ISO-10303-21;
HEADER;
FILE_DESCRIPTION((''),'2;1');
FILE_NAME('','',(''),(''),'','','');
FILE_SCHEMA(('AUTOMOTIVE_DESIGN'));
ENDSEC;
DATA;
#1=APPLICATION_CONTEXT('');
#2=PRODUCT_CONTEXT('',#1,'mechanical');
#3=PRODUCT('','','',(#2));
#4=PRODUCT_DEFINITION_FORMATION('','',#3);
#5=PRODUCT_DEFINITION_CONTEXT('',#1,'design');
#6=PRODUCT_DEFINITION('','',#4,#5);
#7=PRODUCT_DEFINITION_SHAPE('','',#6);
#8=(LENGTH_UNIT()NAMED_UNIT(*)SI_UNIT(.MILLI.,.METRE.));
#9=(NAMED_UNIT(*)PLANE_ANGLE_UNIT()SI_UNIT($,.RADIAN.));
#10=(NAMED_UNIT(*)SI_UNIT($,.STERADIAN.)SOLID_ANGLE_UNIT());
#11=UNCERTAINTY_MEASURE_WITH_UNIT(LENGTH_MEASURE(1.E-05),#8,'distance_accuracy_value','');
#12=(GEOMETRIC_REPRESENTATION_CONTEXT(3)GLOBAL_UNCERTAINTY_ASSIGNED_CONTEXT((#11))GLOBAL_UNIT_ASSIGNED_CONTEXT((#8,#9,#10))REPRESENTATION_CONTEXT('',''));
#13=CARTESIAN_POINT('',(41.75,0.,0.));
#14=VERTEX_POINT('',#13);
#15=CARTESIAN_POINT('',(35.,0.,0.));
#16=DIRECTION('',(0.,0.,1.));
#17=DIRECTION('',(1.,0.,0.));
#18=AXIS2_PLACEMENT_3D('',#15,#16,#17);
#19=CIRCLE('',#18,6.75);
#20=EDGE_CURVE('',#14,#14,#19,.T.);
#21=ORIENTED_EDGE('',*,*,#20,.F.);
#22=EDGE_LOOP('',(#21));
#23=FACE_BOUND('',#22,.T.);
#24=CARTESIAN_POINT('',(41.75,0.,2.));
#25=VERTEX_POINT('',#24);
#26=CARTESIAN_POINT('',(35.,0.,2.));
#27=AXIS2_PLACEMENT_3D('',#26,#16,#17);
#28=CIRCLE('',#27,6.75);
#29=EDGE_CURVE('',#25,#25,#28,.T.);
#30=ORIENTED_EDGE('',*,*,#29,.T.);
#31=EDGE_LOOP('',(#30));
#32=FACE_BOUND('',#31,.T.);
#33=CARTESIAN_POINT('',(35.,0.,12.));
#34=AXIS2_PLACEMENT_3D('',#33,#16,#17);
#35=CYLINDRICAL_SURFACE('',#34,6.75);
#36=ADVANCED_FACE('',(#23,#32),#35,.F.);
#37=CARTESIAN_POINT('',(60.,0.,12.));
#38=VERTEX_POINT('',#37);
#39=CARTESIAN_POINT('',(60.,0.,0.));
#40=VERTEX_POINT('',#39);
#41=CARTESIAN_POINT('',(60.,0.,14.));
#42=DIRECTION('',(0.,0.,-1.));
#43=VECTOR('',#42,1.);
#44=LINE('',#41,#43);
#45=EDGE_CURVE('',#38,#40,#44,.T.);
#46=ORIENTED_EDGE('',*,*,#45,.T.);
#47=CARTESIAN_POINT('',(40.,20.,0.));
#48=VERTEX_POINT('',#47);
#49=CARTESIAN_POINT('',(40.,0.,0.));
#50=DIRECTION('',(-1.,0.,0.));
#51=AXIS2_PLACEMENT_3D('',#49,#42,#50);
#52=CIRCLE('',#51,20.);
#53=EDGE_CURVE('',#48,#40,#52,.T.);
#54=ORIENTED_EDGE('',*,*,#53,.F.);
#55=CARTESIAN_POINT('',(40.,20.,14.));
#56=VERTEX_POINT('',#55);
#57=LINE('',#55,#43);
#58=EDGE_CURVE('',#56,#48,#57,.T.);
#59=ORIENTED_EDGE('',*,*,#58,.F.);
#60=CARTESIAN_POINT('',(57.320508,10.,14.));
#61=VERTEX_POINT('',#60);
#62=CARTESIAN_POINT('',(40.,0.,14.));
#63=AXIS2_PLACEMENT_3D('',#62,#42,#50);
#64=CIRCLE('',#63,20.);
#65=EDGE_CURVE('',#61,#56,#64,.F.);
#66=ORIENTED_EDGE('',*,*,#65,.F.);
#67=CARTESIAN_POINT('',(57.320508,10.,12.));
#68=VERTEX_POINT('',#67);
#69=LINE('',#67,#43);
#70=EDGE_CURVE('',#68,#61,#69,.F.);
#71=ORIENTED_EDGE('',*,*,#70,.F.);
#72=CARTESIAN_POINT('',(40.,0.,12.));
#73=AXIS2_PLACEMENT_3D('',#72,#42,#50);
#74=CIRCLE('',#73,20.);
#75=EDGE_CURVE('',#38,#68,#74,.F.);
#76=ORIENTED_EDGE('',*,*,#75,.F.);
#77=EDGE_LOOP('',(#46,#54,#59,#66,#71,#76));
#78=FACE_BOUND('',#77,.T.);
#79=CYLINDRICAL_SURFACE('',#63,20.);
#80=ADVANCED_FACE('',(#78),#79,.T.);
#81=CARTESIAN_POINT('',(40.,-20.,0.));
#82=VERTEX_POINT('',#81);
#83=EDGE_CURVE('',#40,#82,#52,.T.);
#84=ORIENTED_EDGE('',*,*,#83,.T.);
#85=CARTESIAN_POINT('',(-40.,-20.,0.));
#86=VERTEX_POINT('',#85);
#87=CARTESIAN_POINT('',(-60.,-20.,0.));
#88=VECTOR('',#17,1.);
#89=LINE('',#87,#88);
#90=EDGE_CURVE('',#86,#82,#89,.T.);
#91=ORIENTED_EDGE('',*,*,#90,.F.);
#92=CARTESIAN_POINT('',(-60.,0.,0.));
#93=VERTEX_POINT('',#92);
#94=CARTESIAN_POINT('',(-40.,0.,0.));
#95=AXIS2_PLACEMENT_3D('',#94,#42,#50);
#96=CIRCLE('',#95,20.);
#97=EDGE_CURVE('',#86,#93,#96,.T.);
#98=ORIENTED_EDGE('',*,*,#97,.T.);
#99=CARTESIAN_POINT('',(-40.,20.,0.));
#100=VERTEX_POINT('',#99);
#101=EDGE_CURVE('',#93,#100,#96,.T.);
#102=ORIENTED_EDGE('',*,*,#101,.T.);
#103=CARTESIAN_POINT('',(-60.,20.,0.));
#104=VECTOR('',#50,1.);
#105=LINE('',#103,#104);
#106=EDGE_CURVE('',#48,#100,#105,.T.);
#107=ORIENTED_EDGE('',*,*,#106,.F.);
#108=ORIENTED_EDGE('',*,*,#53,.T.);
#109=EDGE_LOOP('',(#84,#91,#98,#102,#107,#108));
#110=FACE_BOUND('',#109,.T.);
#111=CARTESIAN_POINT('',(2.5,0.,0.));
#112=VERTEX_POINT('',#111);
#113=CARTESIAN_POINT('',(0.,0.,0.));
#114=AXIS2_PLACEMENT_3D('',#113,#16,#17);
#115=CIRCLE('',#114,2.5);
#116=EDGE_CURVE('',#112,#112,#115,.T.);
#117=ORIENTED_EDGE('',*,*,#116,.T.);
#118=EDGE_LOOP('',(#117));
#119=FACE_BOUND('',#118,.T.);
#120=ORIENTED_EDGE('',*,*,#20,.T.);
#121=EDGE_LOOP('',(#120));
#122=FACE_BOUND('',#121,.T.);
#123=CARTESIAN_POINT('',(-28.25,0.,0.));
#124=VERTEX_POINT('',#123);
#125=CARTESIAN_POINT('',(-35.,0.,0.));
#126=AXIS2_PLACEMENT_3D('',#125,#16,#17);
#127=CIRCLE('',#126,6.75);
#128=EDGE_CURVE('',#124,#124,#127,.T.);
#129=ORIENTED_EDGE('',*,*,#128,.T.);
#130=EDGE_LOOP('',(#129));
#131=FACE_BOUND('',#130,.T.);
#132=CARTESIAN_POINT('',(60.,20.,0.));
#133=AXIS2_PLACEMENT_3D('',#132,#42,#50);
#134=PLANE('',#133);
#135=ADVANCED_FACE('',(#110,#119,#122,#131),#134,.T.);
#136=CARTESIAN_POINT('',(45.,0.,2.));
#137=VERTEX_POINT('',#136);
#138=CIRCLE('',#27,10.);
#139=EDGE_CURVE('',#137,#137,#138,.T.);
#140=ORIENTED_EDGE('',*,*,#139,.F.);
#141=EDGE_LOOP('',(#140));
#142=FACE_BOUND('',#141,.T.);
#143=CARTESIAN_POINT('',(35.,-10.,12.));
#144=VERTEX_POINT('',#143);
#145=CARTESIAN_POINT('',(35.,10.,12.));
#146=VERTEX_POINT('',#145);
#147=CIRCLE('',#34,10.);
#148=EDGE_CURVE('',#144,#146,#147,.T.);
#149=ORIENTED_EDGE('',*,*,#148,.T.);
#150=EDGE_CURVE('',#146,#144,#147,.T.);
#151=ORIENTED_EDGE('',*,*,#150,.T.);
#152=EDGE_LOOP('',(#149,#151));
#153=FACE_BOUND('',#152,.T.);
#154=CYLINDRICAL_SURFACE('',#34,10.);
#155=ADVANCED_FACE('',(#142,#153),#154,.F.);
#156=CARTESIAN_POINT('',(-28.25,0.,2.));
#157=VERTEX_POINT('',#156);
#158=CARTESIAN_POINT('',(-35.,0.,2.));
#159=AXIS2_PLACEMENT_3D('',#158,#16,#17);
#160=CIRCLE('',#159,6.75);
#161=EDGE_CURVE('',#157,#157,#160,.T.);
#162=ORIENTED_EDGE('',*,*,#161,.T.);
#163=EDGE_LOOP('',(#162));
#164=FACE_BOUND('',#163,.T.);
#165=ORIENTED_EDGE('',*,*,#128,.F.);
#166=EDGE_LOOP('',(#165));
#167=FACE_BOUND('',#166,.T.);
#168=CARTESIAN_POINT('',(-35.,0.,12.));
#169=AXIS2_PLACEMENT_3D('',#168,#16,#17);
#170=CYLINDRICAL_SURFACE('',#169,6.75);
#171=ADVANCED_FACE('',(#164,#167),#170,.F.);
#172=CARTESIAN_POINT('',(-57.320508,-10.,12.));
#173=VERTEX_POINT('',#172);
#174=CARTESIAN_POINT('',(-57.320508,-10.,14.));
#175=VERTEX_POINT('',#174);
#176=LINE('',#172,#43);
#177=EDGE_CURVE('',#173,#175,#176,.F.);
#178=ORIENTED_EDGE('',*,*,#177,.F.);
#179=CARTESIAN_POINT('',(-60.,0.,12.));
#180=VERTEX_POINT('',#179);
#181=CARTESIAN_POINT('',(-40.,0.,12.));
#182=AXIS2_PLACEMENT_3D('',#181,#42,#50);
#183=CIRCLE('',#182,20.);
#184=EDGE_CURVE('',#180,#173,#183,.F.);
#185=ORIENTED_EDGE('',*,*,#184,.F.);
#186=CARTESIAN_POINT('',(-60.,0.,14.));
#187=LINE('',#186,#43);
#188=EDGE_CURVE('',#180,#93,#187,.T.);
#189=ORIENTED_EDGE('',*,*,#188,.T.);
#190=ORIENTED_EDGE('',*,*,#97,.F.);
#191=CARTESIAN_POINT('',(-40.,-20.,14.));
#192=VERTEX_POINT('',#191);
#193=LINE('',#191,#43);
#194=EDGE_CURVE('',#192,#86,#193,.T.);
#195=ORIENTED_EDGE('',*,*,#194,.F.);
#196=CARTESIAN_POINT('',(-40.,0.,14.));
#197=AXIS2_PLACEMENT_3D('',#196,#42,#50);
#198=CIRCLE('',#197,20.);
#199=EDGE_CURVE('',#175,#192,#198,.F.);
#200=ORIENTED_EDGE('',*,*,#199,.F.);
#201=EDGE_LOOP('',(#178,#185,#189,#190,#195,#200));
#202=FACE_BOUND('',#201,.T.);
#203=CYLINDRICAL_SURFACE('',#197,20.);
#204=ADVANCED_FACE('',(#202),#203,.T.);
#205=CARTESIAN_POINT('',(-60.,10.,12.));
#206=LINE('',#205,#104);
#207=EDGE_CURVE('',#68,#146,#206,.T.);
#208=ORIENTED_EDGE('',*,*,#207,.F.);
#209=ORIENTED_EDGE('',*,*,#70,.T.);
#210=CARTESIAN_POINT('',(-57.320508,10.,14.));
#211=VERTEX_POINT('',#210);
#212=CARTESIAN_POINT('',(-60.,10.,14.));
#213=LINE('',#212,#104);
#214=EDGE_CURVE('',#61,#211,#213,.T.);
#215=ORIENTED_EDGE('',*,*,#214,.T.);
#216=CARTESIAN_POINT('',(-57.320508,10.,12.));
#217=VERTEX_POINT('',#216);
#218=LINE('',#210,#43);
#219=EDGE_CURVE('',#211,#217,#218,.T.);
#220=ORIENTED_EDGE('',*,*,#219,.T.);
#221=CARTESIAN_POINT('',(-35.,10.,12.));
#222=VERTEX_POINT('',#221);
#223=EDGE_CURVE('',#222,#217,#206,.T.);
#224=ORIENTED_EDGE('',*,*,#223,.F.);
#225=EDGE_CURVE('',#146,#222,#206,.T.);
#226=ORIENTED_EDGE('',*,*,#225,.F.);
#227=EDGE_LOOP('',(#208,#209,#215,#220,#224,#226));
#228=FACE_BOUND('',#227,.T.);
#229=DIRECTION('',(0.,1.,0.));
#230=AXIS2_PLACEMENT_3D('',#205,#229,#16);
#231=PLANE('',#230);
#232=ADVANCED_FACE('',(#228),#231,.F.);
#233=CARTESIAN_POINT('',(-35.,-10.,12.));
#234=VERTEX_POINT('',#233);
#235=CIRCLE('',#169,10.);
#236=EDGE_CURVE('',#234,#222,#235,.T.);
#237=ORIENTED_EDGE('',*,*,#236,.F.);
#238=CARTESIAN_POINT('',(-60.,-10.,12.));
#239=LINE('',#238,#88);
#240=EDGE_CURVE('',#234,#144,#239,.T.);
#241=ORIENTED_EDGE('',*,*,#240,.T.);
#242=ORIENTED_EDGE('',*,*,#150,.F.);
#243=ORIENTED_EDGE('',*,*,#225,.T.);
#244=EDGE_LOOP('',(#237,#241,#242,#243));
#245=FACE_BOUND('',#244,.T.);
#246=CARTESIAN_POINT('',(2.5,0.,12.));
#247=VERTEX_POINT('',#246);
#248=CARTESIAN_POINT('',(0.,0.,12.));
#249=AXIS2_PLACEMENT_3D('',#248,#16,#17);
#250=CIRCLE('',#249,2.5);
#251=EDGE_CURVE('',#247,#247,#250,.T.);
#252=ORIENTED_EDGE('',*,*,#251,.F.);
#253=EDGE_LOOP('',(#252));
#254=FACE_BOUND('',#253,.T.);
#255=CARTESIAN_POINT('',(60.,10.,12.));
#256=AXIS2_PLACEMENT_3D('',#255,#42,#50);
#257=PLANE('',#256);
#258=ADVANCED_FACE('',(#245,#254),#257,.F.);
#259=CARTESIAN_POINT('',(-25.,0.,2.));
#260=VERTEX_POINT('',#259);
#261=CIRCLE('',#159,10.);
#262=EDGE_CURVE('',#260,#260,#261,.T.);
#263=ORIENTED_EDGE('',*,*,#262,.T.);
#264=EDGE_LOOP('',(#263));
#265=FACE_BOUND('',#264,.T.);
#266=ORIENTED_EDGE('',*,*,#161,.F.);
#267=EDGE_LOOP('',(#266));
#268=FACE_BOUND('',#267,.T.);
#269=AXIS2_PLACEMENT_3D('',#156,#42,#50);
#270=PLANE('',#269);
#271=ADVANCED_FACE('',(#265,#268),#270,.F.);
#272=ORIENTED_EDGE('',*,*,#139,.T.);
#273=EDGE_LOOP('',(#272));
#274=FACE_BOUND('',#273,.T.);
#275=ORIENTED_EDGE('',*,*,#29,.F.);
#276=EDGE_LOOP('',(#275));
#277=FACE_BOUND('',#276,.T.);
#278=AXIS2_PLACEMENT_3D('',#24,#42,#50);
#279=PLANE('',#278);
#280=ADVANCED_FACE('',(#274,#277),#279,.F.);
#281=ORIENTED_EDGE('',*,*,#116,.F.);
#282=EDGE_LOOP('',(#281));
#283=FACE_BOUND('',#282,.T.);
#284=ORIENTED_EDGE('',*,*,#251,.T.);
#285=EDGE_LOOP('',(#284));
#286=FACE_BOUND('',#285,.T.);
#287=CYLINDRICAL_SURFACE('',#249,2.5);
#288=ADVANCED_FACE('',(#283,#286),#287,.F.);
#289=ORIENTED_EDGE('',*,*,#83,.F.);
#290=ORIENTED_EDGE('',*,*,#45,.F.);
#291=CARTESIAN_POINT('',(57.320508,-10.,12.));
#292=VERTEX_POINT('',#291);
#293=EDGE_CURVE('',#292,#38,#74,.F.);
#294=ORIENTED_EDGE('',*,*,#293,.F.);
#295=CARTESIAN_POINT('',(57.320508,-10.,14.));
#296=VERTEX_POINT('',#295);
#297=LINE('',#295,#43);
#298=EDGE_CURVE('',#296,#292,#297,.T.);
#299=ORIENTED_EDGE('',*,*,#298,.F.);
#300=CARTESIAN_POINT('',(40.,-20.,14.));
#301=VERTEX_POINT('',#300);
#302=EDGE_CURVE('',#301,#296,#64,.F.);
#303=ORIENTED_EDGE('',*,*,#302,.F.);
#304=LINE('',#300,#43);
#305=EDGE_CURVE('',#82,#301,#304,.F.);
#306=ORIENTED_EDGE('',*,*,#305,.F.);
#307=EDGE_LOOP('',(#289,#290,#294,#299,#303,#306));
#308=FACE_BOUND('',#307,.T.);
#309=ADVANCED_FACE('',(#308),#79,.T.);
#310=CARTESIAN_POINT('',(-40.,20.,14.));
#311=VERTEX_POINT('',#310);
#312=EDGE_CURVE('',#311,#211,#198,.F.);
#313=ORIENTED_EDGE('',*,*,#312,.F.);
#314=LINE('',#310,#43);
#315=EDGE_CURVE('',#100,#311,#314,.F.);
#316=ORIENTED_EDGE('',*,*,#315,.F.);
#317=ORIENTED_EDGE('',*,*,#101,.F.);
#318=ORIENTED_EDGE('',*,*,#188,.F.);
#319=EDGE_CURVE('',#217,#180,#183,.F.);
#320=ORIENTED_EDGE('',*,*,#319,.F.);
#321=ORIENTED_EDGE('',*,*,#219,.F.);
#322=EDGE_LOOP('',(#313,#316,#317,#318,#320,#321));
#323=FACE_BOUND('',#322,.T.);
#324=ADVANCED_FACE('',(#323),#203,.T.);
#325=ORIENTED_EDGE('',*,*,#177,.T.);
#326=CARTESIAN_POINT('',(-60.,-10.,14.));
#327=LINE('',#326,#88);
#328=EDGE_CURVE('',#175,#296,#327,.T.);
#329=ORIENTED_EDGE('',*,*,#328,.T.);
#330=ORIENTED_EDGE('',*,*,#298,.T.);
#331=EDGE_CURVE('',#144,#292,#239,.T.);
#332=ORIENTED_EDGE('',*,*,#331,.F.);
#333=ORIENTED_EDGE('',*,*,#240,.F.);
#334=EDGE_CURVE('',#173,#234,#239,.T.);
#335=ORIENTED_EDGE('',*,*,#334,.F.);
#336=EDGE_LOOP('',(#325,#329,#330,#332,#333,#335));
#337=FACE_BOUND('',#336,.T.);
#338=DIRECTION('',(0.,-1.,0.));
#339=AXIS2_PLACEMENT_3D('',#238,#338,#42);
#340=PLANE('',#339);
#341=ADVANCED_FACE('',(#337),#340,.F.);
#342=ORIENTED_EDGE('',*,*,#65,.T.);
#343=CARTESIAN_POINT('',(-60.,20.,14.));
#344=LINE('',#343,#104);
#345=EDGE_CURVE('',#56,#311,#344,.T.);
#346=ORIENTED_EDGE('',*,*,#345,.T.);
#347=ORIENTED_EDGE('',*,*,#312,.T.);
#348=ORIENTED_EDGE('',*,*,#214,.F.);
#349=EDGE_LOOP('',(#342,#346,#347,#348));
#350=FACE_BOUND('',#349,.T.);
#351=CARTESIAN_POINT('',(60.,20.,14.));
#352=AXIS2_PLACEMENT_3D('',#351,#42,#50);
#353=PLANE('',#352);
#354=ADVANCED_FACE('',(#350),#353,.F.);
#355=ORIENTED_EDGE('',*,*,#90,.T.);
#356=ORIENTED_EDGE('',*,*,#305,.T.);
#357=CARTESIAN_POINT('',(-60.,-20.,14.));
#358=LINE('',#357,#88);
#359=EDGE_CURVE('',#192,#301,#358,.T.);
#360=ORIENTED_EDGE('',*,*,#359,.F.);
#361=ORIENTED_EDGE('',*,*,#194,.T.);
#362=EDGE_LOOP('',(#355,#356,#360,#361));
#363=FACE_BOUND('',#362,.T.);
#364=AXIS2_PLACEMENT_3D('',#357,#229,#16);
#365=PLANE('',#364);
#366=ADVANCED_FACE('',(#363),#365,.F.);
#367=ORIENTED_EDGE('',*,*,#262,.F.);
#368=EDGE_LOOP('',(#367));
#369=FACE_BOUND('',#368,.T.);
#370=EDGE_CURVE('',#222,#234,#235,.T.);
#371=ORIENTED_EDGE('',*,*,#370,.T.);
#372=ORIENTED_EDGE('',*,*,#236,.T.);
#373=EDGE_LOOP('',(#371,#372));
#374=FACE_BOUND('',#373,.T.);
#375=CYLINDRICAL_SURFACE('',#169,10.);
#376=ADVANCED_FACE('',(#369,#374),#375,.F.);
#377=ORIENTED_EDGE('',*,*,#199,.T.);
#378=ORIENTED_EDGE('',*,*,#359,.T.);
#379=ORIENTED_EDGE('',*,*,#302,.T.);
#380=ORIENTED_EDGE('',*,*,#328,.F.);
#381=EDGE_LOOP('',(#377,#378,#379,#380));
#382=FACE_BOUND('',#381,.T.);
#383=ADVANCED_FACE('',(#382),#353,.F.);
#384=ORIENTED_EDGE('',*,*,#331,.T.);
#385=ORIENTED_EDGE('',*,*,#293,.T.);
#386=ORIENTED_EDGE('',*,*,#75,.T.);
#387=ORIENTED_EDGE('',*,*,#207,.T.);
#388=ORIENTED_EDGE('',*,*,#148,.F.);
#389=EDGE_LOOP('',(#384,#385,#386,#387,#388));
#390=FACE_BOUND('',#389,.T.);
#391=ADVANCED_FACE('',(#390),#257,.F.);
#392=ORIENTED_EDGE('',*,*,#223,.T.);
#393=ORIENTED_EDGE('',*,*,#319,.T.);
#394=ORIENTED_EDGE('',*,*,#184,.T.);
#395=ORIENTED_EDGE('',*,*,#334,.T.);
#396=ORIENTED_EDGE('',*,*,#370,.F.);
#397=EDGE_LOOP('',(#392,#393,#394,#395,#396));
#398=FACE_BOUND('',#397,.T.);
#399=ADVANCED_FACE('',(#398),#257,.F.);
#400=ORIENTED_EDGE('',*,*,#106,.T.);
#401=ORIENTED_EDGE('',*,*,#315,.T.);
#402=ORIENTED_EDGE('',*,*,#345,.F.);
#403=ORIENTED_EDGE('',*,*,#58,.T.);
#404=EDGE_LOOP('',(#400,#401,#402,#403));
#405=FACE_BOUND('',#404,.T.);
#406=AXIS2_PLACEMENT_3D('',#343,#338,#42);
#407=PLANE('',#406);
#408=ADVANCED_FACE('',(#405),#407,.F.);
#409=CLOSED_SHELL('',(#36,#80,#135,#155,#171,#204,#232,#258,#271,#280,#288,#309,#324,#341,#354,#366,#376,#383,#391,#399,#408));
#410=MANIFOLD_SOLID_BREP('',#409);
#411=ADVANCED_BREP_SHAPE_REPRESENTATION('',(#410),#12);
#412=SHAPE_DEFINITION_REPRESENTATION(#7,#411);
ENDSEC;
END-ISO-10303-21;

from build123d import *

# Parameters (mm, degrees)
SKETCH_1_W                    = 120
SKETCH_1_H                    = 40
EXTRUDE_1_DEPTH               = 14
SKETCH_2_W                    = 120
SKETCH_2_H                    = 20
CUT_EXTRUDE_1_DEPTH           = 2
HOLE_WIZARD_M12_1_D           = 13.5
HOLE_WIZARD_M12_1_CBORE_D     = 20
HOLE_WIZARD_M12_1_CBORE_DEPTH = 10
FILLET_1_R                    = 20
HOLE_WIZARD_M6_1_D            = 5


with BuildPart() as part:
    # 草图1 → 凸台-拉伸1 (new body)
    with BuildSketch(Plane.XY):
        Rectangle(SKETCH_1_W, SKETCH_1_H)
    extrude(amount=EXTRUDE_1_DEPTH)

    # 草图2 → 切除-拉伸1 (cut)
    with BuildSketch(Plane.XY.offset(14)):
        Rectangle(SKETCH_2_W, SKETCH_2_H)
    extrude(amount=-CUT_EXTRUDE_1_DEPTH, mode=Mode.SUBTRACT)

    # M12 六角头螺栓的柱形沉头孔1 (through all)
    with Locations(Plane.XY.offset(12)):
        with Locations((-35, 0), (35, 0)):
            CounterBoreHole(HOLE_WIZARD_M12_1_D / 2, HOLE_WIZARD_M12_1_CBORE_D / 2, HOLE_WIZARD_M12_1_CBORE_DEPTH)

    # 圆角1
    fillet_1_edges = [part.edges().sort_by_distance(p)[0] for p in [
        (60, 20, 7),
        (60, -20, 7),
        (-60, -20, 7),
        (-60, 20, 7),
    ]]
    fillet(fillet_1_edges, radius=FILLET_1_R - 0.0001)  # a hair under: the kernel refuses the full size

    # M6 螺纹孔1 (through all)
    with Locations(Plane.XY.offset(12)):
        with Locations((0, 0)):
            Hole(HOLE_WIZARD_M6_1_D / 2)


solid = part.part
